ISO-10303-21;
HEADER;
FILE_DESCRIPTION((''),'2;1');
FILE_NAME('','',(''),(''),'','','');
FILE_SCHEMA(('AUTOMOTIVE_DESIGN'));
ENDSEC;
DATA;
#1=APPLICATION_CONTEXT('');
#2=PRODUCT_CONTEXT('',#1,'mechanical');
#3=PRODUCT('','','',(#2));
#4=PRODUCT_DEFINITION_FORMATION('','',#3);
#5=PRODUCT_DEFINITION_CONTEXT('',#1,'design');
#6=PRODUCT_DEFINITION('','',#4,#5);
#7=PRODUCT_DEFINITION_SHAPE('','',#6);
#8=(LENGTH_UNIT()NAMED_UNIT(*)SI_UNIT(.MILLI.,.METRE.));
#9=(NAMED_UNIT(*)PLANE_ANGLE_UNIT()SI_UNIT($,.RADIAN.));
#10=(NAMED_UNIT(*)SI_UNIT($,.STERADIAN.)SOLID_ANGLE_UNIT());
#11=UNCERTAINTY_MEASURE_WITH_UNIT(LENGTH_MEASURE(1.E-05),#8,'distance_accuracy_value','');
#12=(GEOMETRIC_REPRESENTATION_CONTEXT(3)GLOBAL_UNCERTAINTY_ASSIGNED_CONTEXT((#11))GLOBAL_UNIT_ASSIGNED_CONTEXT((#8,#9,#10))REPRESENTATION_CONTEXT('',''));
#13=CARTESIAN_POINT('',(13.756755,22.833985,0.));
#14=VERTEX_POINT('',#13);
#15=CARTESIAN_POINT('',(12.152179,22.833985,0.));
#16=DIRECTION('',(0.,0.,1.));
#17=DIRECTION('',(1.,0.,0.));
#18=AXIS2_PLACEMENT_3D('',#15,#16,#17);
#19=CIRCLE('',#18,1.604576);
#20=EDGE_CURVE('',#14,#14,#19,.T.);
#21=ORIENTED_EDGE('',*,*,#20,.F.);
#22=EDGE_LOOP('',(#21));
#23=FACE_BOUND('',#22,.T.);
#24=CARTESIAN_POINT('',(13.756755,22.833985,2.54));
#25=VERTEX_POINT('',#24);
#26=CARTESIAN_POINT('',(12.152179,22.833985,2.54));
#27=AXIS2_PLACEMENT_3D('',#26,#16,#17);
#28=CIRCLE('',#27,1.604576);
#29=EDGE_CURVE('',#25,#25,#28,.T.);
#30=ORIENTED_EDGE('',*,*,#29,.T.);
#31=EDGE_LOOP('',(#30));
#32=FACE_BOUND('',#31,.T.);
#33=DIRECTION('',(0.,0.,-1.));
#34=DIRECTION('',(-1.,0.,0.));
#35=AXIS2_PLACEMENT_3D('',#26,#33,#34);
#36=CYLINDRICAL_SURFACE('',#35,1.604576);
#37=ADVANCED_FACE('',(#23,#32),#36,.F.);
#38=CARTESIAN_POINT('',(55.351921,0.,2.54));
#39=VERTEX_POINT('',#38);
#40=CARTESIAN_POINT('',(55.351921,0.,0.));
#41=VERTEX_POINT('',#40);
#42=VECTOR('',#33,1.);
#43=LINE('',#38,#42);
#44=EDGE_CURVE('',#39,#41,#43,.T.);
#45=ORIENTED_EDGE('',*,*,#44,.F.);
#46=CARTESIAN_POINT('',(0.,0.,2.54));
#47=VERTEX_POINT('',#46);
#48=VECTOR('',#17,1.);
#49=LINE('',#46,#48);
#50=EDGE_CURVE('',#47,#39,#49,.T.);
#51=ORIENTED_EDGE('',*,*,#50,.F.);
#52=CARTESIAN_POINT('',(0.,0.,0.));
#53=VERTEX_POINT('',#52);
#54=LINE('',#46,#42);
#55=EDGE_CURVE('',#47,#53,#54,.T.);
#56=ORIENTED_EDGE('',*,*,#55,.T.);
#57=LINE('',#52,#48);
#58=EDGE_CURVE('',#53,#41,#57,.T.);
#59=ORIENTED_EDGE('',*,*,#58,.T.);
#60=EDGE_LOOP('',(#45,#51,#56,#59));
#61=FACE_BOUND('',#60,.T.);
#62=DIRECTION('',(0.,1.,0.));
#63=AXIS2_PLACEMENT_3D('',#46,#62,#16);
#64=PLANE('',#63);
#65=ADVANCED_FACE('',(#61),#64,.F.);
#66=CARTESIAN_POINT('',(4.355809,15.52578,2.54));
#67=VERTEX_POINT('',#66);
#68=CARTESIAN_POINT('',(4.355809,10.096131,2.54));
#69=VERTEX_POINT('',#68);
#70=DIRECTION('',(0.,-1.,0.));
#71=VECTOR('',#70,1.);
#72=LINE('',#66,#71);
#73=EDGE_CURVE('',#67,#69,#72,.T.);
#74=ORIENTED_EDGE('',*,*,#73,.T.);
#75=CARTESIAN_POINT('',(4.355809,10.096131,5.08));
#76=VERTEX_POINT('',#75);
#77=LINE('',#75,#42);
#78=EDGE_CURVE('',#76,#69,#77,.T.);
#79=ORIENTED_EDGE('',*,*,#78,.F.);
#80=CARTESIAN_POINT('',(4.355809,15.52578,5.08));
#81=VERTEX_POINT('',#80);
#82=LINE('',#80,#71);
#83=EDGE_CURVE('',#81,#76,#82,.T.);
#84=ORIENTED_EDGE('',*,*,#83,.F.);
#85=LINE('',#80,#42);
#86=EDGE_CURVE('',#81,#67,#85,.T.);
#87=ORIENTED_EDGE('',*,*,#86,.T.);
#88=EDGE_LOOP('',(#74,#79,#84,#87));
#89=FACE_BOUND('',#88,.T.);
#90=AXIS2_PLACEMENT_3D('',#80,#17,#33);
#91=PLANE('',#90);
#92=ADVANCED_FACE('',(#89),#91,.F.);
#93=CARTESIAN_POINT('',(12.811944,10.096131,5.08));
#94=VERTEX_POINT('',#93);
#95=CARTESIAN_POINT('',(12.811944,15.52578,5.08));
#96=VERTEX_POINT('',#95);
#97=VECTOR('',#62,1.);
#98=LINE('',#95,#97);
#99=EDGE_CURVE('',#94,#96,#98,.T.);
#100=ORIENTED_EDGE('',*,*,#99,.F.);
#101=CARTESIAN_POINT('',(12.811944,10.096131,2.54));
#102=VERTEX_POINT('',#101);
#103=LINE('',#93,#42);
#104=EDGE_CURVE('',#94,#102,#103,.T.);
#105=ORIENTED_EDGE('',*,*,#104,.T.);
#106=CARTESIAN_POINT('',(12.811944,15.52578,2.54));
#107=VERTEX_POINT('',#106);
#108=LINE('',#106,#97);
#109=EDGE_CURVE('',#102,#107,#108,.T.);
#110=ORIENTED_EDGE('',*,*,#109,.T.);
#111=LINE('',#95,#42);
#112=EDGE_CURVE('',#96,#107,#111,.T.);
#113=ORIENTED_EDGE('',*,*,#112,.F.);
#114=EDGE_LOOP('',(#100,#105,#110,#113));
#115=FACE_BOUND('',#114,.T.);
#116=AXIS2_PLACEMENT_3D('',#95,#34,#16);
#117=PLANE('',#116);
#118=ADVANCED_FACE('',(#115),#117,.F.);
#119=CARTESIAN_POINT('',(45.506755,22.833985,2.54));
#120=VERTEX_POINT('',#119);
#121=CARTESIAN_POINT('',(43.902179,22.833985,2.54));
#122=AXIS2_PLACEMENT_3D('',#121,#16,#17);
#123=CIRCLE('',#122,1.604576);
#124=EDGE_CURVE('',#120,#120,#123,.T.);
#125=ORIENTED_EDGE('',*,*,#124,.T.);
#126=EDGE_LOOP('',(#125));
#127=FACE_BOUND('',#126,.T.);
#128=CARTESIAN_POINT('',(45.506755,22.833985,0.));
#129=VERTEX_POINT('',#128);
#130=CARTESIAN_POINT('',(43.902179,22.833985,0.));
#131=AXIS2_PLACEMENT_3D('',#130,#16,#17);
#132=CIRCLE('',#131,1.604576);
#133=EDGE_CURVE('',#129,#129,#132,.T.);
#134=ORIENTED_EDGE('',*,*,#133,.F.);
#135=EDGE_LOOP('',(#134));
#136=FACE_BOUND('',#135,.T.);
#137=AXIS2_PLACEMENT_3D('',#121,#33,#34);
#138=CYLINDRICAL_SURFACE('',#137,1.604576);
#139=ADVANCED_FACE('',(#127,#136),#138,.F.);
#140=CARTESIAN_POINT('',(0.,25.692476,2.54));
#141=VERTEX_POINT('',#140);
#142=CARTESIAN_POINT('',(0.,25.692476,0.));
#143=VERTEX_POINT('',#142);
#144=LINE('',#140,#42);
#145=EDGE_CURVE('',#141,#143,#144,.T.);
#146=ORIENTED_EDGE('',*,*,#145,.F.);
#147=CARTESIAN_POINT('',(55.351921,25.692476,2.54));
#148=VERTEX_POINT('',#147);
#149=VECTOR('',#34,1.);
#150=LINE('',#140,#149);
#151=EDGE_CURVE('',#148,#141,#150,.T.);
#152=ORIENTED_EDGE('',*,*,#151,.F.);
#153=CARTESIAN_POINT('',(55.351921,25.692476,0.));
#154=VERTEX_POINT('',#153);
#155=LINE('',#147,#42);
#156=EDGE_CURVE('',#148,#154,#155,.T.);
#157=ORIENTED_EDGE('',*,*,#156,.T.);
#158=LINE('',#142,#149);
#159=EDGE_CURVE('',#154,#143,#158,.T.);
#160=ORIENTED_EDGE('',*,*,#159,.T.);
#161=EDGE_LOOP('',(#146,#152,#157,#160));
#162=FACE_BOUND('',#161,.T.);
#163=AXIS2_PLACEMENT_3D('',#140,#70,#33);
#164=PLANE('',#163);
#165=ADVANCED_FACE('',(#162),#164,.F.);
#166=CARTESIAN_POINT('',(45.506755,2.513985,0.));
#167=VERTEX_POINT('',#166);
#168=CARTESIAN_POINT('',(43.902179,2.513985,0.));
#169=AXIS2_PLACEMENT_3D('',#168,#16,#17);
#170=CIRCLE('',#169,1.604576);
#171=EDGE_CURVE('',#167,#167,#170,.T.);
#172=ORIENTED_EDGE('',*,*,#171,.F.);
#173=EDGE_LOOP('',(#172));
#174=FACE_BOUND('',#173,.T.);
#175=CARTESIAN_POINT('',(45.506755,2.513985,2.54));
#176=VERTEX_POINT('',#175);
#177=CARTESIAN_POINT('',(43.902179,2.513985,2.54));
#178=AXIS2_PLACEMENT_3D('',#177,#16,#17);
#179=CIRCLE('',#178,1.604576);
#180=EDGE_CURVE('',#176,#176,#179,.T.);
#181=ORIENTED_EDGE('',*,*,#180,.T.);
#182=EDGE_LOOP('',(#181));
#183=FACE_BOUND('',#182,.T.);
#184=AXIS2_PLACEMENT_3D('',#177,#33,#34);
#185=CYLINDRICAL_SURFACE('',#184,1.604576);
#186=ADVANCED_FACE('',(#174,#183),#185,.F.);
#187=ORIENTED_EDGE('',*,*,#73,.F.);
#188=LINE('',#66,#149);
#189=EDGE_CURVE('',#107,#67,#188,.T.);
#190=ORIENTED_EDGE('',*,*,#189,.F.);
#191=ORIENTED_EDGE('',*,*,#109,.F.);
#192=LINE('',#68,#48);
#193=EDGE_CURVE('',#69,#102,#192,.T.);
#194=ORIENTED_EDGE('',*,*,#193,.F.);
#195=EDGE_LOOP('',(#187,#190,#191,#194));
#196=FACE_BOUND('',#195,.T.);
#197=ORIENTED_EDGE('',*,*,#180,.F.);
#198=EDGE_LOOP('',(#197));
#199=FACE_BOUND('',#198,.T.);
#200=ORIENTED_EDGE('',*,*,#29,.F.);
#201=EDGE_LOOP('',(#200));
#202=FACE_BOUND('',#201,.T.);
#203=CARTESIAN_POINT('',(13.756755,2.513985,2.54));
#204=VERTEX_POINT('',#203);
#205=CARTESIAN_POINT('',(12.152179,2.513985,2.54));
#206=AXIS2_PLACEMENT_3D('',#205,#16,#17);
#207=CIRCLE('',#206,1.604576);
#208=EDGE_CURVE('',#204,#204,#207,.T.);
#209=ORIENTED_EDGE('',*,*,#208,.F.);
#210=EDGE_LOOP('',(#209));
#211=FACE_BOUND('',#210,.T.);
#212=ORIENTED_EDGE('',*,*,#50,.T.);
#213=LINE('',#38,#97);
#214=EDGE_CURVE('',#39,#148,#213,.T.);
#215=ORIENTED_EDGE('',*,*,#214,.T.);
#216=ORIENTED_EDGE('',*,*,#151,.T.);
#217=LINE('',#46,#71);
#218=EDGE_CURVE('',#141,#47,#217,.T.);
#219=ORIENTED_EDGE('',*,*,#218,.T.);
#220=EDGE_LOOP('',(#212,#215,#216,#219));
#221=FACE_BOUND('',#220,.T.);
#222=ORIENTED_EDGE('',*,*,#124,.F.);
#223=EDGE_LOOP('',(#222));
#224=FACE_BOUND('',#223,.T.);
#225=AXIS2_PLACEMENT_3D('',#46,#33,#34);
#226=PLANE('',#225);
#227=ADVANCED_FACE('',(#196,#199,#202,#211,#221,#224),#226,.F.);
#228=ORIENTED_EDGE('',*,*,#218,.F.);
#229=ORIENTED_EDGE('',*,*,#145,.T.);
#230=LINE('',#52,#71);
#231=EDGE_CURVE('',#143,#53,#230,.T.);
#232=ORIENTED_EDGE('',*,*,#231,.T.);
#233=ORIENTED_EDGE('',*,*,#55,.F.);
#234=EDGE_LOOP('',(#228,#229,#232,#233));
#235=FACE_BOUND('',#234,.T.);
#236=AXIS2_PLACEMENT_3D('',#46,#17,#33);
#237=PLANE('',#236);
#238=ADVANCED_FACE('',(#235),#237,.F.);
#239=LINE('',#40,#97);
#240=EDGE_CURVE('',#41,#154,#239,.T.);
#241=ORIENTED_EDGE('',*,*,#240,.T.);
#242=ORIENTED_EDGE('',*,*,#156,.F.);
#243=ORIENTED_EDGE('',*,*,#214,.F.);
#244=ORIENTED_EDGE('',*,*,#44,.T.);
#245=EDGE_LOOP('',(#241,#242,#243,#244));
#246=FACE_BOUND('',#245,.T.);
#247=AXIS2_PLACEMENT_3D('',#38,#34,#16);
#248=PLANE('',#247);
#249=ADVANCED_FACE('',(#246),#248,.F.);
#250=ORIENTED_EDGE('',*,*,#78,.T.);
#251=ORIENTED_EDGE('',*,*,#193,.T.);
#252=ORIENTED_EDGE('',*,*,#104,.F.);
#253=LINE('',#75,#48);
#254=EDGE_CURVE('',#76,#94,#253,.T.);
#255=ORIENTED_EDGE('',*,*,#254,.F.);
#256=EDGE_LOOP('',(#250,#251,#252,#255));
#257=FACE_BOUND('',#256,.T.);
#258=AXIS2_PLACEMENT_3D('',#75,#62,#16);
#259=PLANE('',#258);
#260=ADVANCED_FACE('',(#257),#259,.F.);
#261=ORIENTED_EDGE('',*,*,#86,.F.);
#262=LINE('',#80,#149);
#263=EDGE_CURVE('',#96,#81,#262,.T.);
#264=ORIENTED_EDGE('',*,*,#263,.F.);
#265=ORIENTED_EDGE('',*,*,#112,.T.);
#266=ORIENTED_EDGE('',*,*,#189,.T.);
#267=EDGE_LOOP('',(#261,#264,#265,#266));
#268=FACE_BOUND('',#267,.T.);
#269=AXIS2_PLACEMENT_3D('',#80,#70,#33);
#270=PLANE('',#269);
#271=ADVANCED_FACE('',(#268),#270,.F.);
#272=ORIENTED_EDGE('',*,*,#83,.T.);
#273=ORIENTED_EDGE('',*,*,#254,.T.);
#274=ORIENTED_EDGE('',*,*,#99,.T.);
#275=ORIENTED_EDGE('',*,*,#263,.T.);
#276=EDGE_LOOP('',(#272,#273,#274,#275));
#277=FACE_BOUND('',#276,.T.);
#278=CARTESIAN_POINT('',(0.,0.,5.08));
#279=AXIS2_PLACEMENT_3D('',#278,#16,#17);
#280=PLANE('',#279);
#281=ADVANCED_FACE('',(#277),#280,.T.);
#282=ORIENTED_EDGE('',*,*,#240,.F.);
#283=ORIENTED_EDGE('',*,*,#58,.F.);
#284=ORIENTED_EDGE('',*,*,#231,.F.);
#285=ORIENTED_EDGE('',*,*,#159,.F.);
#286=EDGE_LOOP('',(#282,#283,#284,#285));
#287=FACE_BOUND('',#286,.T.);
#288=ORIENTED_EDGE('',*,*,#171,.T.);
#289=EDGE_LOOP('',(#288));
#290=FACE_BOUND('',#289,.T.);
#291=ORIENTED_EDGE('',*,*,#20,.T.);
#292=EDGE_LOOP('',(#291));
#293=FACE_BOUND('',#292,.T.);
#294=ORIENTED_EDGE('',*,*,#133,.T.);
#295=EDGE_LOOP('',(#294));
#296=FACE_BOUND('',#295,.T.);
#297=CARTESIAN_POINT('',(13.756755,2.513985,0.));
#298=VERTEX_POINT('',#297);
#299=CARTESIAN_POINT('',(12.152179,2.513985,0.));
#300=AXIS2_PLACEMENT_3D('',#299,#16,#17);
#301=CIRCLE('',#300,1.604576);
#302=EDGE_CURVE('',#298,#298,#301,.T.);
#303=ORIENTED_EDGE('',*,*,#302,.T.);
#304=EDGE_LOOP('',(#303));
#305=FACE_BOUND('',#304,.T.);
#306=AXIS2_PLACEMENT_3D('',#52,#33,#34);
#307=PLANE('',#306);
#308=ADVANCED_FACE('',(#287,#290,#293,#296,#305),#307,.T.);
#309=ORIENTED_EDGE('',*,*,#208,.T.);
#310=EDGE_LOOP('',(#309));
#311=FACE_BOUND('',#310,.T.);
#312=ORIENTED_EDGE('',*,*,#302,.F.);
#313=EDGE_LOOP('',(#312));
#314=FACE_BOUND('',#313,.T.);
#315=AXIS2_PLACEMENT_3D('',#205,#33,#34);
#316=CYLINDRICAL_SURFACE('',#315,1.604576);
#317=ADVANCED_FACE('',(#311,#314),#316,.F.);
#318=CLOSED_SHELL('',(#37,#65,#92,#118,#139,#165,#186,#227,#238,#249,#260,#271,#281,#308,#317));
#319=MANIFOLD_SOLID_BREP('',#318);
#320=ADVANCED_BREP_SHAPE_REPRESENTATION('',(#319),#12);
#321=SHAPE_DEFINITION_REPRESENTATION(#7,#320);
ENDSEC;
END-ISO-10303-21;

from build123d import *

# Parameters (mm, degrees)
SKETCH2_W               = 55.351920974
SKETCH2_H               = 25.692475641
SKETCH2_R               = 1.604575537
BOSS_EXTRUDE1_DEPTH     = 2.54
BOSS_EXTRUDE2_START     = 4.355808651
BOSS_EXTRUDE2_OUTLINE_W = 5.429648603
BOSS_EXTRUDE2_OUTLINE_H = 2.54
BOSS_EXTRUDE2_DEPTH     = 8.456135595


# Read off the part's stored shape, not the designer's step: Boss-Extrude2
with BuildPart() as part:
    # Sketch2 → Boss-Extrude1 (new body)
    with BuildSketch(Plane.XY):
        with Locations((27.675960487, 12.846237821)):
            Rectangle(SKETCH2_W, SKETCH2_H)
        with Locations((12.152179379, 2.513985209)):
            Circle(SKETCH2_R, mode=Mode.SUBTRACT)
        with Locations((43.902179379, 2.513985209)):
            Circle(SKETCH2_R, mode=Mode.SUBTRACT)
        with Locations((43.902179379, 22.833985209)):
            Circle(SKETCH2_R, mode=Mode.SUBTRACT)
        with Locations((12.152179379, 22.833985209)):
            Circle(SKETCH2_R, mode=Mode.SUBTRACT)
    extrude(amount=BOSS_EXTRUDE1_DEPTH)

    # Boss-Extrude2 outline → Boss-Extrude2 (add)
    with BuildSketch(Plane.YZ.offset(BOSS_EXTRUDE2_START)):
        with Locations((12.810955728, 3.81)):
            Rectangle(BOSS_EXTRUDE2_OUTLINE_W, BOSS_EXTRUDE2_OUTLINE_H)
    extrude(amount=BOSS_EXTRUDE2_DEPTH)


solid = part.part
